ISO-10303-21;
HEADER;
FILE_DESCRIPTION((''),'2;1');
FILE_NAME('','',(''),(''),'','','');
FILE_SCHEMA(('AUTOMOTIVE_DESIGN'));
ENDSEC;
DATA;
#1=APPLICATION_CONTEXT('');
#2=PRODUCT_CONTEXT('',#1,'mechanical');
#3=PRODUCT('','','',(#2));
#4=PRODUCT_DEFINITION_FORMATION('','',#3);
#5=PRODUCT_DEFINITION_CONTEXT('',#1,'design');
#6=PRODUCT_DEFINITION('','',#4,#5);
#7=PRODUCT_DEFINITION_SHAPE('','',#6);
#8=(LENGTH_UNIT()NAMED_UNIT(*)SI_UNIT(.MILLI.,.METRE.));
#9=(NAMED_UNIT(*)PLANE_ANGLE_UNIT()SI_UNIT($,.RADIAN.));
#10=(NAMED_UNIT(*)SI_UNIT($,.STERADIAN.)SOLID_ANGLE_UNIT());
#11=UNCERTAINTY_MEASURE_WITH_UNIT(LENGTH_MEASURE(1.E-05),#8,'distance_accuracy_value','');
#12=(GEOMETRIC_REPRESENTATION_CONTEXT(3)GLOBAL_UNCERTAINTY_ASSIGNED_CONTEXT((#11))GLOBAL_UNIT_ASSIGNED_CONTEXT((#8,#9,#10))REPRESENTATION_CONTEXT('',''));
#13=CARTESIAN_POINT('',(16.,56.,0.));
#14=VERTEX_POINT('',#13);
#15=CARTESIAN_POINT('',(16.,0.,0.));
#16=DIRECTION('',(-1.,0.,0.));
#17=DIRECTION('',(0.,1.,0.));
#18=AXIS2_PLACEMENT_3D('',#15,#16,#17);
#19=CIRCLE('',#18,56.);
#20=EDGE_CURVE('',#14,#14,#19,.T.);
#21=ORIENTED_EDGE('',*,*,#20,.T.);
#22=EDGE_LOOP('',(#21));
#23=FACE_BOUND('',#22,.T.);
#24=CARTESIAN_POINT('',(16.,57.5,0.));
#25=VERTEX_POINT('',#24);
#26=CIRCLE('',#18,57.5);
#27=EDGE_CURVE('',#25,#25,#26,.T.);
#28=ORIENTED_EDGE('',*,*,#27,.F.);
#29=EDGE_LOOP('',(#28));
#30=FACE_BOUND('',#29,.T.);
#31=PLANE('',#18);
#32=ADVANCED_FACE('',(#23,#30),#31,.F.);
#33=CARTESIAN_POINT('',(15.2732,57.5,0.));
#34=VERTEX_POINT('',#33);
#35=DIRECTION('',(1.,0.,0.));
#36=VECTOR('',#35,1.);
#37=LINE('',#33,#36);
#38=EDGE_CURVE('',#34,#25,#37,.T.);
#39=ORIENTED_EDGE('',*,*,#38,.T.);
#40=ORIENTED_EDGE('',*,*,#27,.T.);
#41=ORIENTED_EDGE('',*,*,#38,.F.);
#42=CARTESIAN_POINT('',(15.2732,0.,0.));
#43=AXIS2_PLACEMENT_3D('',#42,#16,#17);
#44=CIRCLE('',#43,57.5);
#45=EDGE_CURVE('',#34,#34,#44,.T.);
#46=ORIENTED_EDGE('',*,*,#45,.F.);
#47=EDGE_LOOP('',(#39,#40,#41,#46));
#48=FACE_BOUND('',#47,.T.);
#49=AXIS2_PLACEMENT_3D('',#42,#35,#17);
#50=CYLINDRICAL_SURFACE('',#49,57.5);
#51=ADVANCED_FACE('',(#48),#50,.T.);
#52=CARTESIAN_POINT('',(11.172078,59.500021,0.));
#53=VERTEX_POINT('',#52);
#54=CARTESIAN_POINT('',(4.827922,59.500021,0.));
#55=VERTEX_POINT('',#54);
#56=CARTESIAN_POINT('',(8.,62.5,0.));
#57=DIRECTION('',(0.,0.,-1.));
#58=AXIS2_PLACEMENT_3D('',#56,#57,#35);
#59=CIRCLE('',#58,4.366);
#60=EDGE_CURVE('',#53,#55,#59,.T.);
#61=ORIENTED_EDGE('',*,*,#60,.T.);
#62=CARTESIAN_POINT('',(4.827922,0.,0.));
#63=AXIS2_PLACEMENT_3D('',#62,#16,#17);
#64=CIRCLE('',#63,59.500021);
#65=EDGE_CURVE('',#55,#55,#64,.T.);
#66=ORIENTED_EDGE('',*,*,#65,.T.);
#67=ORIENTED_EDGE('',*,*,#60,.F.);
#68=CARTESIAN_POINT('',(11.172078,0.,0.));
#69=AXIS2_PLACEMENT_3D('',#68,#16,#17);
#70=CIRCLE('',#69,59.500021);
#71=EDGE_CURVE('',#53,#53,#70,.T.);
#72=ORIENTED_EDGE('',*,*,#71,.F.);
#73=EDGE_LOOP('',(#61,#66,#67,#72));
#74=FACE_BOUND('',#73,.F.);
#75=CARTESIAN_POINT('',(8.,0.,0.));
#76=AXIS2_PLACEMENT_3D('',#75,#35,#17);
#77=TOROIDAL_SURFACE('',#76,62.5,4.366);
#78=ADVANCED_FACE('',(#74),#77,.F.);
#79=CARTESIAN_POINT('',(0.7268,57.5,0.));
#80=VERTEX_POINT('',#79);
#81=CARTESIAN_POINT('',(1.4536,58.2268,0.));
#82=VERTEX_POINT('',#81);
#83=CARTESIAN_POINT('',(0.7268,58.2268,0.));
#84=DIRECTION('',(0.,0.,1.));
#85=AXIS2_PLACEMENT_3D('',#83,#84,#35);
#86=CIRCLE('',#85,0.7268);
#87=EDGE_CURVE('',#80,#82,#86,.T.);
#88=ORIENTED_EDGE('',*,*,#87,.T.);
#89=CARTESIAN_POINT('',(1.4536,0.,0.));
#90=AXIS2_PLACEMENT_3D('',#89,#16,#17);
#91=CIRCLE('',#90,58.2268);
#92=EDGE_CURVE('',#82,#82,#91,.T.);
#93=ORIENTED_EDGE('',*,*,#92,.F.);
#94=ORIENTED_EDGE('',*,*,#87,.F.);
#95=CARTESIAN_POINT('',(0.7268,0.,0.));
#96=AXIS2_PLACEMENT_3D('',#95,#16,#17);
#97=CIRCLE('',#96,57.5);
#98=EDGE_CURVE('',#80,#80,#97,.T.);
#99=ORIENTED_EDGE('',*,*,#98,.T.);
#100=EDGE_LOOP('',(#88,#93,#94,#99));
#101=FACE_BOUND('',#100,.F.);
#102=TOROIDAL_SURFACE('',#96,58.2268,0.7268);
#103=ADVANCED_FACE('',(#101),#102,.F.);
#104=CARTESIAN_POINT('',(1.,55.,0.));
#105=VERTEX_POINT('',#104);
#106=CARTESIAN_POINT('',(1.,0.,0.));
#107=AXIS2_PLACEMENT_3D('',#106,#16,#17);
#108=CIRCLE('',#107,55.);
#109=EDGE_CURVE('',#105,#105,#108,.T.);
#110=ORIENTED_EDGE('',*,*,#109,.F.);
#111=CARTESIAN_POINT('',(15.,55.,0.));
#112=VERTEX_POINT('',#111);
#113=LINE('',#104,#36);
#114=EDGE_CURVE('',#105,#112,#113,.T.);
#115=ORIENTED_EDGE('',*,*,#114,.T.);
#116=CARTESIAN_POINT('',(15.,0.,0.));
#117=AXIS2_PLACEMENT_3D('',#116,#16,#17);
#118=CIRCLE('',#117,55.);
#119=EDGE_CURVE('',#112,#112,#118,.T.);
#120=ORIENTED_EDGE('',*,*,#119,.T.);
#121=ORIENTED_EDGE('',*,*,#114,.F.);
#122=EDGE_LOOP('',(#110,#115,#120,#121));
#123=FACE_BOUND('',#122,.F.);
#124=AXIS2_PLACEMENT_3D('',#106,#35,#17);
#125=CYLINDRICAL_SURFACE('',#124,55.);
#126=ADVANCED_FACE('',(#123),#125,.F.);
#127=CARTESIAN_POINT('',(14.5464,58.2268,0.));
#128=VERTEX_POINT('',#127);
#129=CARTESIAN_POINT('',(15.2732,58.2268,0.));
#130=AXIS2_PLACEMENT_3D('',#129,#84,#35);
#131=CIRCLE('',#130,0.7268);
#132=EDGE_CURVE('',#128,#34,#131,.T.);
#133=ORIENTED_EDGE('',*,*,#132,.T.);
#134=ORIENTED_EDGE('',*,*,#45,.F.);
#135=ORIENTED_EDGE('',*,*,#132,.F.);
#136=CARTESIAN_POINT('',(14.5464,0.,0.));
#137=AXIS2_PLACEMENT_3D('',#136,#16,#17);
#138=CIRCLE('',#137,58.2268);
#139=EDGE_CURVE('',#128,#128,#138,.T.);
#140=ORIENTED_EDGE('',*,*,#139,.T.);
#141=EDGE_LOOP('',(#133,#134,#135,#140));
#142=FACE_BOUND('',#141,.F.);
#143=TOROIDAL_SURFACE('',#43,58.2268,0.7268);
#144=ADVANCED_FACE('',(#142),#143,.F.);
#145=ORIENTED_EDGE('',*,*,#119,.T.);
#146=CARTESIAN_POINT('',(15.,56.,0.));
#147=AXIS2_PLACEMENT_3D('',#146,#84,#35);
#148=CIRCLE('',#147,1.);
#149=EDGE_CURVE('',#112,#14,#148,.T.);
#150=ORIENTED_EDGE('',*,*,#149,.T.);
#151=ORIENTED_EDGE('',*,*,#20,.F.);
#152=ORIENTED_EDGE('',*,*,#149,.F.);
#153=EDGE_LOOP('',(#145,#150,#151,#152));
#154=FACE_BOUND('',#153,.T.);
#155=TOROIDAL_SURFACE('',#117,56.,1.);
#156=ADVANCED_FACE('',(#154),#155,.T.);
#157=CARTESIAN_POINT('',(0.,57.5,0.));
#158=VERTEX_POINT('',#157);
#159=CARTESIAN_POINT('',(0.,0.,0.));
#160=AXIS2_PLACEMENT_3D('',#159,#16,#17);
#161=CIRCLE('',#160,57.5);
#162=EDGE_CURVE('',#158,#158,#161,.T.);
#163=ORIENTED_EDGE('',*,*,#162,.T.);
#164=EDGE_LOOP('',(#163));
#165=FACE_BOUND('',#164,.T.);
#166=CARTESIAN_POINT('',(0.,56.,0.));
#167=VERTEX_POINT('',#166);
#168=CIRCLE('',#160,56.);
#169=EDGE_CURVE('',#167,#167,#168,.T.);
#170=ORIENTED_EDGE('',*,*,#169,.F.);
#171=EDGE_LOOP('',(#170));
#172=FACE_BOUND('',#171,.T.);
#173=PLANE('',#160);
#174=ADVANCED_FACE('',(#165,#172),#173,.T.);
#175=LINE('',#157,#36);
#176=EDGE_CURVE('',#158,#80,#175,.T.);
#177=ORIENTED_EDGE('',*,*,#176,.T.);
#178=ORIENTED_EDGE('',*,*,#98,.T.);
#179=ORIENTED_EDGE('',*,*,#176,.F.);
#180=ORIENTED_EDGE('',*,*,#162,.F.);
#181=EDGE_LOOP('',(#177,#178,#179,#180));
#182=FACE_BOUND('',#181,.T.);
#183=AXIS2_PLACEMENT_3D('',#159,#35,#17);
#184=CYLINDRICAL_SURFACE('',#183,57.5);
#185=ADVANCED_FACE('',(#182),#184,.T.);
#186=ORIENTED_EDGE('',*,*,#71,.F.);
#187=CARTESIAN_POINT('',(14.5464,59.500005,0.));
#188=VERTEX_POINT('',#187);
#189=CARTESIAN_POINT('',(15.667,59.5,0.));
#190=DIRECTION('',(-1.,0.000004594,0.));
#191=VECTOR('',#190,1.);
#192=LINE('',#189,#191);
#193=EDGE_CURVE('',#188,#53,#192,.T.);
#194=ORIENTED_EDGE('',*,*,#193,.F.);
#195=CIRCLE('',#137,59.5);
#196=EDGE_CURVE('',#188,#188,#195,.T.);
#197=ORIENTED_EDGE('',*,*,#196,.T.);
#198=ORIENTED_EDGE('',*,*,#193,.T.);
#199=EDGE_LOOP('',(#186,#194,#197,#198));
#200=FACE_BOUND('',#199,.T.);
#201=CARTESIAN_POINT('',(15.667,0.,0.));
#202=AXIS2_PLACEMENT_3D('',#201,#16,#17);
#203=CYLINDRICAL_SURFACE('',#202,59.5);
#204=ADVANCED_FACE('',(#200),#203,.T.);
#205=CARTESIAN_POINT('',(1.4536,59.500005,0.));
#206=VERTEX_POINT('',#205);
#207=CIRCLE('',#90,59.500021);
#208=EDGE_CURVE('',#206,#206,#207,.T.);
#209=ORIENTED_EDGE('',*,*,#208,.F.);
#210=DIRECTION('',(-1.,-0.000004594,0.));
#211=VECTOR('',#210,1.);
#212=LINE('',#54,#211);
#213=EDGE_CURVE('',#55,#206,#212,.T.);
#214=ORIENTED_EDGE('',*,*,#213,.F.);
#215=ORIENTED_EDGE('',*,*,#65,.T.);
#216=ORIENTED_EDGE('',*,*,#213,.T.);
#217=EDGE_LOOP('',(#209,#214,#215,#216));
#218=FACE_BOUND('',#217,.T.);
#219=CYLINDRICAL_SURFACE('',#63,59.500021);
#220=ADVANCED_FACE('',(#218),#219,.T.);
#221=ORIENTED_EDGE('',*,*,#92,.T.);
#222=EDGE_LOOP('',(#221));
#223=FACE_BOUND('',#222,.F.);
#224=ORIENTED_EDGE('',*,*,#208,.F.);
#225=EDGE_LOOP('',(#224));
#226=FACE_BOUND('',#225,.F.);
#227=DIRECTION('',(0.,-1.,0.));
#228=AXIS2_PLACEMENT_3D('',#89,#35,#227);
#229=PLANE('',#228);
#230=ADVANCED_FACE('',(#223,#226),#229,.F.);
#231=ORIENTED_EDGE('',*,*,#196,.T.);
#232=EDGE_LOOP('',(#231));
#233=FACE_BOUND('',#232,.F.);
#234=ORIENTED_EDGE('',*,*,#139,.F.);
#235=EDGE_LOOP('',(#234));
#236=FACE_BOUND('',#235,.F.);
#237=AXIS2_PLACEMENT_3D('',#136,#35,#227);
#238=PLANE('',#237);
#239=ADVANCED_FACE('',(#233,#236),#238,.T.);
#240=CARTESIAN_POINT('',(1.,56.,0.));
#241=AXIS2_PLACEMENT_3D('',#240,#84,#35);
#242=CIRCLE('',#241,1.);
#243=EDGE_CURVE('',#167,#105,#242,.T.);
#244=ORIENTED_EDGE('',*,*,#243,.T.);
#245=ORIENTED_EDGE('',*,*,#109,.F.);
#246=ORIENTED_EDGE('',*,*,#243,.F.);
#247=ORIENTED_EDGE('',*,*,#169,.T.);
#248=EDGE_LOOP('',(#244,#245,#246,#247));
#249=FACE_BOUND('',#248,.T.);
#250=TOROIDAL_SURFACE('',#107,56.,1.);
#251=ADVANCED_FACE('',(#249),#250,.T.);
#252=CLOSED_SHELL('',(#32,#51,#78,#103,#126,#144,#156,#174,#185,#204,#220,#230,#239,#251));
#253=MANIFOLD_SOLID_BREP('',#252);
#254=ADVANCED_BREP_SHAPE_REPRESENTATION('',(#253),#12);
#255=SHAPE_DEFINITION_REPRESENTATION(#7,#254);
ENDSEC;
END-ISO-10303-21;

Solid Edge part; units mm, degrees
sketch "Sketch1" plane through (0, 0, 0) normal (0, 0, 1) x (1, 0, 0)
  arc A0 (0, 56) -> (1, 55) centre (1, 56) ccw
  line L0 (1, 55) -> (15, 55)
  arc A1 (15, 55) -> (16, 56) centre (15, 56) ccw
  line L1 (16, 56) -> (16, 59.167)
  arc A2 (16, 59.167) -> (15.667, 59.5) centre (15.667, 59.167) ccw
  line L2 (15.667, 59.5) -> (11.1721, 59.5)
  arc A3 (11.1721, 59.5) -> (4.8279, 59.5) centre (8, 62.5) cw
  line L3 (4.8279, 59.5) -> (0.333, 59.5)
  arc A4 (0.333, 59.5) -> (0, 59.167) centre (0.333, 59.167) ccw
  line L4 (0, 59.167) -> (0, 56)
revolve "RevolvedProtrusion1" add sketch "Sketch1" angle 360 about axis through (15, 0, 0) along (-1, 0, 0)
sketch "Sketch2" plane through (0, 0, 0) normal (0, 0, 1) x (1, 0, 0)
  line L0 (0, 57.5) -> (0.7268, 57.5)
  arc A0 (0.7268, 57.5) -> (1.4536, 58.2268) centre (0.7268, 58.2268) ccw
  line L1 (1.4536, 58.2268) -> (1.4536, 61.5)
  line L2 (1.4536, 61.5) -> (14.5464, 61.5)
  line L3 (14.5464, 61.5) -> (14.5464, 58.2268)
  arc A1 (14.5464, 58.2268) -> (15.2732, 57.5) centre (15.2732, 58.2268) ccw
  line L4 (15.2732, 57.5) -> (16, 57.5)
  line L5 (16, 57.5) -> (16, 63.5)
  line L6 (16, 63.5) -> (0, 63.5)
  line L7 (0, 63.5) -> (0, 57.5)
revolve "RevolvedCutout1" cut sketch "Sketch2" angle 360 about axis through (16, 0, 0) along (-1, 0, 0)
